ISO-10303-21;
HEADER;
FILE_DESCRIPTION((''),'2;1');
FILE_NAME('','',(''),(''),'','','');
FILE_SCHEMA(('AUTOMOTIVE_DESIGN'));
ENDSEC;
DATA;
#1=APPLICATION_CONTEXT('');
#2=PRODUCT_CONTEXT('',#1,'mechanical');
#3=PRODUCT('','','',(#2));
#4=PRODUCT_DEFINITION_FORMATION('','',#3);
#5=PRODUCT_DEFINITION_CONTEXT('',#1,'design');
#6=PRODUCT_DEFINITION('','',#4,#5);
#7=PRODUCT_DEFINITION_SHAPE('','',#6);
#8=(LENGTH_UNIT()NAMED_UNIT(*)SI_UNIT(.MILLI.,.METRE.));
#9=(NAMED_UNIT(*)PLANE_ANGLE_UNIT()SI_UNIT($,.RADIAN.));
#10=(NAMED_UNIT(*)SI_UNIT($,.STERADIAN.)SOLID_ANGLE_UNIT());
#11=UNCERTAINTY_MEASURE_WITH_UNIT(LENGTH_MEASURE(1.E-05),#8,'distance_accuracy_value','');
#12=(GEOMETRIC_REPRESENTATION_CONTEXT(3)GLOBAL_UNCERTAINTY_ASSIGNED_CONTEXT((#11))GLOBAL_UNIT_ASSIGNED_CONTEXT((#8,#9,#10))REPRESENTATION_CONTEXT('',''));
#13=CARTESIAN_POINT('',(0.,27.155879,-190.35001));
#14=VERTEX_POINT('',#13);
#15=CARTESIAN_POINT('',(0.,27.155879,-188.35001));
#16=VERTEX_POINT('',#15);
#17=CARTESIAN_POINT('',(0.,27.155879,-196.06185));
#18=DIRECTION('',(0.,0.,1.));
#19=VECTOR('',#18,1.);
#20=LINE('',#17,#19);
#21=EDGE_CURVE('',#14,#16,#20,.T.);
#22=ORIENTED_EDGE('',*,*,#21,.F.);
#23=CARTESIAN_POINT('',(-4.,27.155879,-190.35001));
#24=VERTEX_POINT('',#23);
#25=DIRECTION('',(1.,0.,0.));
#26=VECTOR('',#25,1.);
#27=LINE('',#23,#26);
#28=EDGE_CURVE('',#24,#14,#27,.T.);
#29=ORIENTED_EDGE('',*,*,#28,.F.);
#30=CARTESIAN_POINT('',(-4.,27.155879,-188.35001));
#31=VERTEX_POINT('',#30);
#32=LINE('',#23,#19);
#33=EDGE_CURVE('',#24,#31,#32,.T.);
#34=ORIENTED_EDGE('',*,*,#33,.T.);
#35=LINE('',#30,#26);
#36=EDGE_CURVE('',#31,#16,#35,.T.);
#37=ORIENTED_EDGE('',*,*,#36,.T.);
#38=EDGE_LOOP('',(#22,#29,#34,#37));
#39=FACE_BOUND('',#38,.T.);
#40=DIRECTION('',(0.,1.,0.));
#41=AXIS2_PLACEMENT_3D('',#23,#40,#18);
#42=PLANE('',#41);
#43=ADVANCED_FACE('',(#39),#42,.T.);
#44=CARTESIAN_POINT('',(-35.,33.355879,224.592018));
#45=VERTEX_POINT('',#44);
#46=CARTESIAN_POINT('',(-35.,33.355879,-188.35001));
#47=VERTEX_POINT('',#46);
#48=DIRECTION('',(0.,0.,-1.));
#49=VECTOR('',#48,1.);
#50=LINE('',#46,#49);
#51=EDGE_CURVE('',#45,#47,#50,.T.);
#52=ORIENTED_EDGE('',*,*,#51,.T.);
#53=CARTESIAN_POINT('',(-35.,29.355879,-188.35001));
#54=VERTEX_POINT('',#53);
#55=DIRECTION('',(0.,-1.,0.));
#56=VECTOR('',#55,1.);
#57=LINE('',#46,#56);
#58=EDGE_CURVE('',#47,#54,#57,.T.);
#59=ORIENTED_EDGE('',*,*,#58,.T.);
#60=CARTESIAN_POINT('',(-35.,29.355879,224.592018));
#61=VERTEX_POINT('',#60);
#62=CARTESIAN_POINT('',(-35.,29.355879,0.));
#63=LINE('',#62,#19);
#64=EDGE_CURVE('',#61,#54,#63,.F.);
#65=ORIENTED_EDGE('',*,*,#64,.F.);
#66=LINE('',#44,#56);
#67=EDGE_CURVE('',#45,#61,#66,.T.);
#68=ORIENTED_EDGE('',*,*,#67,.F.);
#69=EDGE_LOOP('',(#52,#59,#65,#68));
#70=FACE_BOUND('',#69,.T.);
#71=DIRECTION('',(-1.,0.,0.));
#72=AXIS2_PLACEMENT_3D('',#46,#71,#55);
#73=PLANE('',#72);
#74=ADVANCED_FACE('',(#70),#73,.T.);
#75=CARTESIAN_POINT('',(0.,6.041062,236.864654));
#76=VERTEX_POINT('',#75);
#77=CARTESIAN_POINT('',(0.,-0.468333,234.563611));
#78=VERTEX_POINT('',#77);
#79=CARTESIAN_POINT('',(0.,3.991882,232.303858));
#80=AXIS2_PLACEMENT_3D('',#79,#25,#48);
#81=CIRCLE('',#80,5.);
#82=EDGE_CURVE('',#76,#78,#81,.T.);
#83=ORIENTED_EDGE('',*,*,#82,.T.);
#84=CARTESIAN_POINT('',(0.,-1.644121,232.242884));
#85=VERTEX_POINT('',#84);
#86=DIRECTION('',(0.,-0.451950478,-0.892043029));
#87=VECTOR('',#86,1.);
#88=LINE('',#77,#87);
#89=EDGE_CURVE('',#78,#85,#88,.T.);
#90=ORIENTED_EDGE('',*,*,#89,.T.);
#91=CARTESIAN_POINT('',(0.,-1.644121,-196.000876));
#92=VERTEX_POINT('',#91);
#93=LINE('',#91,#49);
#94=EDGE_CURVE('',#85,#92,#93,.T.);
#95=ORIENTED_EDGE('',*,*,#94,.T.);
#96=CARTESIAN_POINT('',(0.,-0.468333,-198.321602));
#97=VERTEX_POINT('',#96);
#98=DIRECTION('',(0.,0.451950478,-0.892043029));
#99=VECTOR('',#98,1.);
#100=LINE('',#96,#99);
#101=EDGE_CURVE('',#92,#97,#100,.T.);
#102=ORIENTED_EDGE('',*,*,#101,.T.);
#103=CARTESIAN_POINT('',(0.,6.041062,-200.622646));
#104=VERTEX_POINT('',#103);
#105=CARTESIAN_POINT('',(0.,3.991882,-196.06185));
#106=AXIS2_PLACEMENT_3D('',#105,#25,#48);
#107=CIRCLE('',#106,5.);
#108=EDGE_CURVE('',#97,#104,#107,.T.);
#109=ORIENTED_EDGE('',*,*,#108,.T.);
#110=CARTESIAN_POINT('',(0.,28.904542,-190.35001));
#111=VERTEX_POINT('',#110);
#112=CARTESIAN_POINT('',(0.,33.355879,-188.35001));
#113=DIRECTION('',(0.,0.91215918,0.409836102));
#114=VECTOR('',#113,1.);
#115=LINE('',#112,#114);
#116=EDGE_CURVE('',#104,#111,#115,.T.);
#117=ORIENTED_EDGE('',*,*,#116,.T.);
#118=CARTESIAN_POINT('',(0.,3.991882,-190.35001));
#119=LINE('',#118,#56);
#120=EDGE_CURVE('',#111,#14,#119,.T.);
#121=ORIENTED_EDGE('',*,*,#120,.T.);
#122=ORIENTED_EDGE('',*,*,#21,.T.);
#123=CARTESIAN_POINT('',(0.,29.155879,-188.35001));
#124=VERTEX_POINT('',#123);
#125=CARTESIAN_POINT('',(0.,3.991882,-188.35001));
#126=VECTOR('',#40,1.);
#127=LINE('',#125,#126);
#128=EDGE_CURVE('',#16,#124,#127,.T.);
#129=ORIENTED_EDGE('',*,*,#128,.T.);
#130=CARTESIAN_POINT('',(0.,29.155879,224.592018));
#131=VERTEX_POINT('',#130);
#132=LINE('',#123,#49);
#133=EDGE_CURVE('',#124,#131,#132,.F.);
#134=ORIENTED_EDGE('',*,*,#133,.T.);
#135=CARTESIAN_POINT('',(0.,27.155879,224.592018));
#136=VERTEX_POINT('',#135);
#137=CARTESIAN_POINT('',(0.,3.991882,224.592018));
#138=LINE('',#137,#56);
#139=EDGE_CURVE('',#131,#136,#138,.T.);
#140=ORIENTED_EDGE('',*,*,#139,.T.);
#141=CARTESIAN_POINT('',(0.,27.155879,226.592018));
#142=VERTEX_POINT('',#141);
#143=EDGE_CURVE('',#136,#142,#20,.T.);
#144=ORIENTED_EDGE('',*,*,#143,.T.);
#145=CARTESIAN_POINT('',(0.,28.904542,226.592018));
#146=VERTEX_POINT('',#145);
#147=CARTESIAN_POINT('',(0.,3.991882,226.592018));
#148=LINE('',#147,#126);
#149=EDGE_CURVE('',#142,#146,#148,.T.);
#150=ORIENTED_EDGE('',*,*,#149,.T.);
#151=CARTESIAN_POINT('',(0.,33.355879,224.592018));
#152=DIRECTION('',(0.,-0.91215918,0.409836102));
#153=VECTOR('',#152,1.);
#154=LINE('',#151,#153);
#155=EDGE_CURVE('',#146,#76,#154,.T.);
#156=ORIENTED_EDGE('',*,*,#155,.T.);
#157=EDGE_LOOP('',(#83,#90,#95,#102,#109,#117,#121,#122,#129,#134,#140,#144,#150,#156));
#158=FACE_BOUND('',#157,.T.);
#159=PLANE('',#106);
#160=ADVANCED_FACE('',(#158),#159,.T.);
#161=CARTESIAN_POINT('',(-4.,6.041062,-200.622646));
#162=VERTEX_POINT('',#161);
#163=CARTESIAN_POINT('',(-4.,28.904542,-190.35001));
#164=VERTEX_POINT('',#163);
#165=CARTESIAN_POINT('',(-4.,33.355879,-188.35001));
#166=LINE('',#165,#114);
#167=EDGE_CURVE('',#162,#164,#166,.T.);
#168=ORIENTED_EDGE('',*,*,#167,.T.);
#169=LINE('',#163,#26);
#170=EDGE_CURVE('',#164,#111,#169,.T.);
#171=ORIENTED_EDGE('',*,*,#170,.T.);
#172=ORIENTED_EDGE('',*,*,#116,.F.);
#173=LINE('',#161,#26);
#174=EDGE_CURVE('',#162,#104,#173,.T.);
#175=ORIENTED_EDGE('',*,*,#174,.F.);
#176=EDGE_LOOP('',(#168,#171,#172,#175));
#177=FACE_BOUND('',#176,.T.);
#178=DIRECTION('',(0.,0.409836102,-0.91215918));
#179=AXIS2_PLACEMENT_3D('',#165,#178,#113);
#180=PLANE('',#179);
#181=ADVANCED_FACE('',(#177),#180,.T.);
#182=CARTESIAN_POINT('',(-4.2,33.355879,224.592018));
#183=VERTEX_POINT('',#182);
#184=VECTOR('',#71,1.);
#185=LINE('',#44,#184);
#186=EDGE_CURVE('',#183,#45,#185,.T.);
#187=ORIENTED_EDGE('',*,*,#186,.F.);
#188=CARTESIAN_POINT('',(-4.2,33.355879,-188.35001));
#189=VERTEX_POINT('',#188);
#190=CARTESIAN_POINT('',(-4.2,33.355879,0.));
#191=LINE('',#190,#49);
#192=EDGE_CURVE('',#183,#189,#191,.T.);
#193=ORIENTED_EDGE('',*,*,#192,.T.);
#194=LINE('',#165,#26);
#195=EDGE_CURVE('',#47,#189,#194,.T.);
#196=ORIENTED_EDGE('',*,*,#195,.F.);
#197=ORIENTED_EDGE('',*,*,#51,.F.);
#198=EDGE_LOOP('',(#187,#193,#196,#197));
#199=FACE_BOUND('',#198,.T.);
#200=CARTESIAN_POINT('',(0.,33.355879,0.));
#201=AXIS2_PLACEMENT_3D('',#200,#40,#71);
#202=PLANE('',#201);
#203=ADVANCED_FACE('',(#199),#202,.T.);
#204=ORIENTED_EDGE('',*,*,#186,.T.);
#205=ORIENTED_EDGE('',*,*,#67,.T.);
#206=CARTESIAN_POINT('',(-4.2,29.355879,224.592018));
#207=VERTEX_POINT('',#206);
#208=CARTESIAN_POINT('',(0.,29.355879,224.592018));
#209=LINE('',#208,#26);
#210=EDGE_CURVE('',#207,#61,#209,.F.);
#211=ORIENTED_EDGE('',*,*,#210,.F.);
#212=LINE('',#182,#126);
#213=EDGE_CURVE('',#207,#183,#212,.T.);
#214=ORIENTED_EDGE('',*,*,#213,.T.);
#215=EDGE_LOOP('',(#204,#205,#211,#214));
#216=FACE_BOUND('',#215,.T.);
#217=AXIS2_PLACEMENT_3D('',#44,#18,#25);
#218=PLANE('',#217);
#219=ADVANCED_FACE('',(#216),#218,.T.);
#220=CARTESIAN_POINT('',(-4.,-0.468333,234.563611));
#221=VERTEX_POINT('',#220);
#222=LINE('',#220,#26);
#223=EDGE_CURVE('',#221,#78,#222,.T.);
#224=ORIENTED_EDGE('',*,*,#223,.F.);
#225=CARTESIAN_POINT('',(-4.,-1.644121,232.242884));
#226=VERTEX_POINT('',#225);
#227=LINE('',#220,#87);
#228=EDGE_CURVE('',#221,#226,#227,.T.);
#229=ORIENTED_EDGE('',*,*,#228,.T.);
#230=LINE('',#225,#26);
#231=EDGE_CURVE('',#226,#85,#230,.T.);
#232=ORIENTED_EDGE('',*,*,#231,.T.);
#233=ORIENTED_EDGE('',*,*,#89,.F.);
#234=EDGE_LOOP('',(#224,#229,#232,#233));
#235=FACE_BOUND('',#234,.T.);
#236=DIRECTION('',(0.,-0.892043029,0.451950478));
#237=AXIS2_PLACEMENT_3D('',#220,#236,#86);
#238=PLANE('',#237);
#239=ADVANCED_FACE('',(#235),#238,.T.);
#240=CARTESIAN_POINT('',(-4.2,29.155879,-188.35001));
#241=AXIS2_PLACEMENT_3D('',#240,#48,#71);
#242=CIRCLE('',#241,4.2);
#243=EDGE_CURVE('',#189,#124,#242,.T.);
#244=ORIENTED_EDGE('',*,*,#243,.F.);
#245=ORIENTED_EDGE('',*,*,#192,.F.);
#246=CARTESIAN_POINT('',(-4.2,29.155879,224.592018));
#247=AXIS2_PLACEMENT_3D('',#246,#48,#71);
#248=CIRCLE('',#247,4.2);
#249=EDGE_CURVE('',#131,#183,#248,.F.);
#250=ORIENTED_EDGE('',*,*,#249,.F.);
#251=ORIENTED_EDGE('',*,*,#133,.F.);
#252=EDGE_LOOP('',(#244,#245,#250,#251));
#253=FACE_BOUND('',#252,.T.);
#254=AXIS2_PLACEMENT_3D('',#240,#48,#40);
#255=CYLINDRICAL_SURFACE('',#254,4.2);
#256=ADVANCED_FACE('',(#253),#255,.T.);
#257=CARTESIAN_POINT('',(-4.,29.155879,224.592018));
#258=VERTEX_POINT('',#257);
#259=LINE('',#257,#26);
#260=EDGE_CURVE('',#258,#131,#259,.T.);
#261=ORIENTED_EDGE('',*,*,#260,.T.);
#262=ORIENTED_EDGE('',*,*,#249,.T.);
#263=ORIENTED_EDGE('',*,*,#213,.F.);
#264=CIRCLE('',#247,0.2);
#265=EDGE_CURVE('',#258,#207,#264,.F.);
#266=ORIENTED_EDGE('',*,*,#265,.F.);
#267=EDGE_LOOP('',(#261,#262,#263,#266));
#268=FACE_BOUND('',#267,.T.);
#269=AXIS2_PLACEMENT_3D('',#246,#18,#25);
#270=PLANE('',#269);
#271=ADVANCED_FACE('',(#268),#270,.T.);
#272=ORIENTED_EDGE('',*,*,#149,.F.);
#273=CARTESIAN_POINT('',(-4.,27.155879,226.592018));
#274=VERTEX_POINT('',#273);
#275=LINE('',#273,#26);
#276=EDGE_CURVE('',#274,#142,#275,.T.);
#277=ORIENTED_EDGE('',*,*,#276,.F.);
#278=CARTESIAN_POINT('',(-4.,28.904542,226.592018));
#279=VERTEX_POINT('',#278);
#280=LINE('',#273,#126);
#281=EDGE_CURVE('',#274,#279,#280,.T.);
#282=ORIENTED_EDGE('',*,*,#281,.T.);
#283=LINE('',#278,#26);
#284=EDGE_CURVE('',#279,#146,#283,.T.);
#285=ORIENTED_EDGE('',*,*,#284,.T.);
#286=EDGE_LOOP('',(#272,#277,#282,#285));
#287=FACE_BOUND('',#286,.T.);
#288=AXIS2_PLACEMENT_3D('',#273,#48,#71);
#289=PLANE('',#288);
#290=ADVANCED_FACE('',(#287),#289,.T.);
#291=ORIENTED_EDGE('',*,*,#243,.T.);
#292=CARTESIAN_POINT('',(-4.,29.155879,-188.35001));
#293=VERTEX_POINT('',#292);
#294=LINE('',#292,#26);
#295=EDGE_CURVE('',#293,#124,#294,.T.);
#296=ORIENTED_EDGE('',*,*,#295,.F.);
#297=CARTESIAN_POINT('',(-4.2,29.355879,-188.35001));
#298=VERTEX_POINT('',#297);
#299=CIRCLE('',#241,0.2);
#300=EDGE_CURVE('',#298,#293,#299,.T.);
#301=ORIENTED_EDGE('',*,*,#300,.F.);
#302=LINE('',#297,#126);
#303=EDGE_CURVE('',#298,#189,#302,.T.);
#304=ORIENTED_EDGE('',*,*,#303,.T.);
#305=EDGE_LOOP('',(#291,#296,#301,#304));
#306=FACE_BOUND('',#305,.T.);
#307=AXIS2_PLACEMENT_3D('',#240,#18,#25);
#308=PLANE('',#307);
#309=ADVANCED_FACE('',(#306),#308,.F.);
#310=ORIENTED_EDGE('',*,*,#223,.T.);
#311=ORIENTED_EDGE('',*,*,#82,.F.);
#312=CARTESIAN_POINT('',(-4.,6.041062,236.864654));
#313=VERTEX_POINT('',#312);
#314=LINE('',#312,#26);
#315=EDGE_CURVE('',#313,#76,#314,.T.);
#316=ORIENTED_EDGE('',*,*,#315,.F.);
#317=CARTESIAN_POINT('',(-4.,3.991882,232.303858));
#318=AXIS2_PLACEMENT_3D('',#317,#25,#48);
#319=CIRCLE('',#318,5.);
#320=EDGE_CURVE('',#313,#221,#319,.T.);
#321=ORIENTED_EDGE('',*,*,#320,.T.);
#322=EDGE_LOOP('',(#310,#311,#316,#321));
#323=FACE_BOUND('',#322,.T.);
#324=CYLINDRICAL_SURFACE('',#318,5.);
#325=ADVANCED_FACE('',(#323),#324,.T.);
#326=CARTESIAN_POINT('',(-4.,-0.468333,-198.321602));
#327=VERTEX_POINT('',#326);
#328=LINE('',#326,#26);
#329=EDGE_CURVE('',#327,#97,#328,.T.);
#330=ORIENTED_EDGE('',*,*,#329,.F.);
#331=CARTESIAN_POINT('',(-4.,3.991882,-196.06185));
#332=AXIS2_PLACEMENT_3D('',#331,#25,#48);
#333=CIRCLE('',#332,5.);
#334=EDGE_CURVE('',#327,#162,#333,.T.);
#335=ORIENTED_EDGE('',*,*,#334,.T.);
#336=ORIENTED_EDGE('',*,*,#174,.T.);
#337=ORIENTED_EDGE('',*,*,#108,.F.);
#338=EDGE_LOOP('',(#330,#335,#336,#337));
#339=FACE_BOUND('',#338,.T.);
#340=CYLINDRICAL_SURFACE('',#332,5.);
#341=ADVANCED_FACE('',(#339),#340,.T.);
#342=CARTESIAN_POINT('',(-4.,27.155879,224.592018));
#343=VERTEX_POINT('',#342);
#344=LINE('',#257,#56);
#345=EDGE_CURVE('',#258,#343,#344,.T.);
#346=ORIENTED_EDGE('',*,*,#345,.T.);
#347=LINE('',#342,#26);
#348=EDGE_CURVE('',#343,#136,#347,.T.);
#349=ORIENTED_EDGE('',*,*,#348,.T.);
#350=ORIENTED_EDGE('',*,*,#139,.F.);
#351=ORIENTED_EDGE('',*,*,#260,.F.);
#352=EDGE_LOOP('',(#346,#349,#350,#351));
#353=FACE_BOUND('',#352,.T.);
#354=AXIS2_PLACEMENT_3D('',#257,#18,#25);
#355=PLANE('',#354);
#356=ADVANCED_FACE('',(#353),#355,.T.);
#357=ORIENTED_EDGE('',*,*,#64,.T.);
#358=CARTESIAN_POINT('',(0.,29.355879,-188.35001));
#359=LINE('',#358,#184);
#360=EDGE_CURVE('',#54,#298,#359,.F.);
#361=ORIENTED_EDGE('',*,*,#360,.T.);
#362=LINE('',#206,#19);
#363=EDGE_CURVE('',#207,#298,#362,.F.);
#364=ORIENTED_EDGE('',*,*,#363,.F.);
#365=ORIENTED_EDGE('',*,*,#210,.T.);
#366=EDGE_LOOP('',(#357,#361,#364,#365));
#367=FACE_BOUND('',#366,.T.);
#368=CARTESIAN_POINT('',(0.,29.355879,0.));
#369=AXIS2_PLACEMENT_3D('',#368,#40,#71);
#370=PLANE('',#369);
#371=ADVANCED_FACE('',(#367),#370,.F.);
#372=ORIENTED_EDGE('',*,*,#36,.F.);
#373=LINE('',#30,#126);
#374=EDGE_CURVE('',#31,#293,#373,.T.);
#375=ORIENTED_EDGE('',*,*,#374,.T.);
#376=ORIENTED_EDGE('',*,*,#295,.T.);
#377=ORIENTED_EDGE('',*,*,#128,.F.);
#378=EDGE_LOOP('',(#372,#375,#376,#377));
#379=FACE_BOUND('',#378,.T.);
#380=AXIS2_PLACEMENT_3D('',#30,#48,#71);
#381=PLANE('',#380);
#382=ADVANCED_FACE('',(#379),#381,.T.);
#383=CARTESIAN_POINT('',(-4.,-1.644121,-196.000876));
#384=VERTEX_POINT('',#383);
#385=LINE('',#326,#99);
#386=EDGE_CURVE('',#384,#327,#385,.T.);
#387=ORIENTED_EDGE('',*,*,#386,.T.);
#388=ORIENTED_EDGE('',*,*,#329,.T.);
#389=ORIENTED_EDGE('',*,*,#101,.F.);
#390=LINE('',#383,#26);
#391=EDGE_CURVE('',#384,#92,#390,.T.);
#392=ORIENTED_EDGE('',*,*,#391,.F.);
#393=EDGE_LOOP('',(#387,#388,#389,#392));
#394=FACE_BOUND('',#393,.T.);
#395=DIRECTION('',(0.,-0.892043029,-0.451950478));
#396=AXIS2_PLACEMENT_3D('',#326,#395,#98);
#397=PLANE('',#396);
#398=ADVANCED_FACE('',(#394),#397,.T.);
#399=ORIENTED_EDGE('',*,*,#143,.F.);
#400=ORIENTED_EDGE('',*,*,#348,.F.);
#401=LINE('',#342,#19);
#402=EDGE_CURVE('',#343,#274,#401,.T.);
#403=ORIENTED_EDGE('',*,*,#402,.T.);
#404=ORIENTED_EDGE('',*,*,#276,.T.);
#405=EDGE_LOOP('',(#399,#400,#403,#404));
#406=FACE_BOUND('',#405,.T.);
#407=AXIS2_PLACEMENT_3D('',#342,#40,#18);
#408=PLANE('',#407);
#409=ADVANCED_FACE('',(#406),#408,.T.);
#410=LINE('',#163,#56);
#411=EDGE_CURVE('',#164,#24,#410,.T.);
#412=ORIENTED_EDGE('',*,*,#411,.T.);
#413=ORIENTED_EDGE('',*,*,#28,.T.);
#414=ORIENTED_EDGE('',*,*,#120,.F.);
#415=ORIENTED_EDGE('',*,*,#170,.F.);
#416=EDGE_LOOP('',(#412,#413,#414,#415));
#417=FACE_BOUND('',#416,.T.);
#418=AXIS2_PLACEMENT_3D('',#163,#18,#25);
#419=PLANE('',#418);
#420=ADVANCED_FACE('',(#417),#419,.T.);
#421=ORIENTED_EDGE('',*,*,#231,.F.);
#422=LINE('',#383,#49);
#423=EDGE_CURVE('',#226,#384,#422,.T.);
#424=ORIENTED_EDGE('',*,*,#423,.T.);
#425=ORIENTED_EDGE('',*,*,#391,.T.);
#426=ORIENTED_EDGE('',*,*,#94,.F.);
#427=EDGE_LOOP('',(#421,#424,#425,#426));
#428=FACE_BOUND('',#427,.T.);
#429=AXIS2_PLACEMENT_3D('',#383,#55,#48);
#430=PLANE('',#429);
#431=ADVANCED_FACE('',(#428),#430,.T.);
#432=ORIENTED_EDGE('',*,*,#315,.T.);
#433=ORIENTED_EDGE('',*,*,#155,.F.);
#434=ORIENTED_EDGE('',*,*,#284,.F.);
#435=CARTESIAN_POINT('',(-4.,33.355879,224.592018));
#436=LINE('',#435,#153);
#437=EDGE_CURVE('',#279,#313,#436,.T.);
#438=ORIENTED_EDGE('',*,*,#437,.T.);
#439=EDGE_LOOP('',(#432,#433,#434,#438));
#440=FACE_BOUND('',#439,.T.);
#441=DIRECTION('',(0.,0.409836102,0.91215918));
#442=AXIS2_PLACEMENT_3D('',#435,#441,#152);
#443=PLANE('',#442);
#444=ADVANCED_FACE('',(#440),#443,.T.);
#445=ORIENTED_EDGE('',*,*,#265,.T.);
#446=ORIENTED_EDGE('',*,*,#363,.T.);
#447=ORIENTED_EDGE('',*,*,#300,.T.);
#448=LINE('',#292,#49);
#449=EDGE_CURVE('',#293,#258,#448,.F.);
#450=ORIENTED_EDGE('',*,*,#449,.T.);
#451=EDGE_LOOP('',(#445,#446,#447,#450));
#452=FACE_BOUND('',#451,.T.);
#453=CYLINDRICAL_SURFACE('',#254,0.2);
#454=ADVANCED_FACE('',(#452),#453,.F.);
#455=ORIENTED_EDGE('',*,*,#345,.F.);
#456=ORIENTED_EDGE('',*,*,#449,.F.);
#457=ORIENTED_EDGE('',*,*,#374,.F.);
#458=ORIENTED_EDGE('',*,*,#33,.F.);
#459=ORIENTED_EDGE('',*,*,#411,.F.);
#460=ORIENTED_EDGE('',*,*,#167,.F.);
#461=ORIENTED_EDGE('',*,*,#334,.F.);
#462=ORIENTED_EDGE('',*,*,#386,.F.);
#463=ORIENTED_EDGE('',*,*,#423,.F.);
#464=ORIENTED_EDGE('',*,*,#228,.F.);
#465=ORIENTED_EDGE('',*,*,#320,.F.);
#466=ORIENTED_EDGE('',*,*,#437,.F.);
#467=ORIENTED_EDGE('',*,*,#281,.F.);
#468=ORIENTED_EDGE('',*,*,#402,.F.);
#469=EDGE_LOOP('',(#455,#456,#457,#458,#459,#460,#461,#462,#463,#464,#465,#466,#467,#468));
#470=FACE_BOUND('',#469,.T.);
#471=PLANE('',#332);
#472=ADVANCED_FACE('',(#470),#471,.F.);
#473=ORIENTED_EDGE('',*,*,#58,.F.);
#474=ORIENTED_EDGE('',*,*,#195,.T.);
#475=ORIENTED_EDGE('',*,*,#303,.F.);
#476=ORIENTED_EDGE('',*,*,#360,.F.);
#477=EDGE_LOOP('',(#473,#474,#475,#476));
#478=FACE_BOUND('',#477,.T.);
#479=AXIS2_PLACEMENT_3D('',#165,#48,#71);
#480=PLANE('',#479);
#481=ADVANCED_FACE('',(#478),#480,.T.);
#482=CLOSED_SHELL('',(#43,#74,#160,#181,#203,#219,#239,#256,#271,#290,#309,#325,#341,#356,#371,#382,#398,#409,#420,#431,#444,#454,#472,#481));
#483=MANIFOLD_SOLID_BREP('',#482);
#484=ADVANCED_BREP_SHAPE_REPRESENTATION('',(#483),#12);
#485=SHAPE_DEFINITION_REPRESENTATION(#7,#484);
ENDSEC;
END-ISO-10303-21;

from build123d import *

# Parameters (mm, degrees)
BASE_FLANGE1_DEPTH            = 4
EDGE_FLANGE1_STRIP_W          = 16.4
EDGE_FLANGE1_STRIP_H          = 4
EDGE_FLANGE1_STRIP_CUT_DEPTH  = 412.942027617
EDGE_FLANGE1_RELIEF_W         = 18.4
EDGE_FLANGE1_RELIEF_H         = 2
EDGE_FLANGE1_RELIEF_CUT_DEPTH = 4
EDGE_FLANGE1_DEPTH            = 412.942027617


# Sheet-metal steps are written as plain solids
with BuildPart() as part:
    # Sketch1 → Base-Flange1 (new body)
    with BuildSketch(Plane(origin=(0, 0, 0), x_dir=(0, 0, -1), z_dir=(1, 0, 0))):
        with BuildLine():
            Line((188.350009653, 33.355878637), (-224.592017965, 33.355878637))
            Line((-224.592017965, 33.355878637), (-236.864654255, 6.041062278))
            ThreePointArc((-236.864654255, 6.041062278), (-237.017988994, 2.32545676), (-234.563610744, -0.468333375))
            Line((-234.563610744, -0.468333375), (-232.242884183, -1.644121363))
            Line((-232.242884183, -1.644121363), (196.000875871, -1.644121363))
            Line((196.000875871, -1.644121363), (198.321602432, -0.468333375))
            ThreePointArc((198.321602432, -0.468333375), (200.775980682, 2.32545676), (200.622645942, 6.041062278))
            Line((200.622645942, 6.041062278), (188.350009653, 33.355878637))
        make_face()
    extrude(amount=-BASE_FLANGE1_DEPTH)

    # Edge-Flange1 strip (across the edge) → Edge-Flange1 strip cut (cut)
    with BuildSketch(Plane(origin=(-4, 33.355878637, 224.592017965), x_dir=(0, -1, 0), z_dir=(0, 0, -1))):
        with Locations((-4, -2)):
            Rectangle(EDGE_FLANGE1_STRIP_W, EDGE_FLANGE1_STRIP_H)
    extrude(amount=EDGE_FLANGE1_STRIP_CUT_DEPTH, mode=Mode.SUBTRACT)

    # Edge-Flange1 relief (on the sheet) → Edge-Flange1 relief cut (cut)
    with BuildSketch(Plane(origin=(-4, 29.155878637, 224.592017965), x_dir=(0, -1, 0), z_dir=(-1, 0, 0))):
        with Locations((-7.2, 1)):
            Rectangle(EDGE_FLANGE1_RELIEF_W, EDGE_FLANGE1_RELIEF_H)
        with Locations((-7.2, -413.942027617)):
            Rectangle(EDGE_FLANGE1_RELIEF_W, EDGE_FLANGE1_RELIEF_H)
    extrude(amount=-EDGE_FLANGE1_RELIEF_CUT_DEPTH, mode=Mode.SUBTRACT)

    # Edge-Flange1 section (across the edge) → Edge-Flange1 (add)
    with BuildSketch(Plane(origin=(-4, 33.355878637, 224.592017965), x_dir=(0, -1, 0), z_dir=(0, 0, -1))):
        with BuildLine():
            Line((0, 0.2), (0, 31))
            Line((0, 31), (4, 31))
            Line((4, 31), (4, 0.2))
            ThreePointArc((4, 0.2), (4.058578644, 0.058578644), (4.2, 0))
            Line((4.2, 0), (4.2, -4))
            ThreePointArc((4.2, -4), (1.230151519, -2.769848481), (0, 0.2))
        make_face()
    extrude(amount=EDGE_FLANGE1_DEPTH)


solid = part.part
